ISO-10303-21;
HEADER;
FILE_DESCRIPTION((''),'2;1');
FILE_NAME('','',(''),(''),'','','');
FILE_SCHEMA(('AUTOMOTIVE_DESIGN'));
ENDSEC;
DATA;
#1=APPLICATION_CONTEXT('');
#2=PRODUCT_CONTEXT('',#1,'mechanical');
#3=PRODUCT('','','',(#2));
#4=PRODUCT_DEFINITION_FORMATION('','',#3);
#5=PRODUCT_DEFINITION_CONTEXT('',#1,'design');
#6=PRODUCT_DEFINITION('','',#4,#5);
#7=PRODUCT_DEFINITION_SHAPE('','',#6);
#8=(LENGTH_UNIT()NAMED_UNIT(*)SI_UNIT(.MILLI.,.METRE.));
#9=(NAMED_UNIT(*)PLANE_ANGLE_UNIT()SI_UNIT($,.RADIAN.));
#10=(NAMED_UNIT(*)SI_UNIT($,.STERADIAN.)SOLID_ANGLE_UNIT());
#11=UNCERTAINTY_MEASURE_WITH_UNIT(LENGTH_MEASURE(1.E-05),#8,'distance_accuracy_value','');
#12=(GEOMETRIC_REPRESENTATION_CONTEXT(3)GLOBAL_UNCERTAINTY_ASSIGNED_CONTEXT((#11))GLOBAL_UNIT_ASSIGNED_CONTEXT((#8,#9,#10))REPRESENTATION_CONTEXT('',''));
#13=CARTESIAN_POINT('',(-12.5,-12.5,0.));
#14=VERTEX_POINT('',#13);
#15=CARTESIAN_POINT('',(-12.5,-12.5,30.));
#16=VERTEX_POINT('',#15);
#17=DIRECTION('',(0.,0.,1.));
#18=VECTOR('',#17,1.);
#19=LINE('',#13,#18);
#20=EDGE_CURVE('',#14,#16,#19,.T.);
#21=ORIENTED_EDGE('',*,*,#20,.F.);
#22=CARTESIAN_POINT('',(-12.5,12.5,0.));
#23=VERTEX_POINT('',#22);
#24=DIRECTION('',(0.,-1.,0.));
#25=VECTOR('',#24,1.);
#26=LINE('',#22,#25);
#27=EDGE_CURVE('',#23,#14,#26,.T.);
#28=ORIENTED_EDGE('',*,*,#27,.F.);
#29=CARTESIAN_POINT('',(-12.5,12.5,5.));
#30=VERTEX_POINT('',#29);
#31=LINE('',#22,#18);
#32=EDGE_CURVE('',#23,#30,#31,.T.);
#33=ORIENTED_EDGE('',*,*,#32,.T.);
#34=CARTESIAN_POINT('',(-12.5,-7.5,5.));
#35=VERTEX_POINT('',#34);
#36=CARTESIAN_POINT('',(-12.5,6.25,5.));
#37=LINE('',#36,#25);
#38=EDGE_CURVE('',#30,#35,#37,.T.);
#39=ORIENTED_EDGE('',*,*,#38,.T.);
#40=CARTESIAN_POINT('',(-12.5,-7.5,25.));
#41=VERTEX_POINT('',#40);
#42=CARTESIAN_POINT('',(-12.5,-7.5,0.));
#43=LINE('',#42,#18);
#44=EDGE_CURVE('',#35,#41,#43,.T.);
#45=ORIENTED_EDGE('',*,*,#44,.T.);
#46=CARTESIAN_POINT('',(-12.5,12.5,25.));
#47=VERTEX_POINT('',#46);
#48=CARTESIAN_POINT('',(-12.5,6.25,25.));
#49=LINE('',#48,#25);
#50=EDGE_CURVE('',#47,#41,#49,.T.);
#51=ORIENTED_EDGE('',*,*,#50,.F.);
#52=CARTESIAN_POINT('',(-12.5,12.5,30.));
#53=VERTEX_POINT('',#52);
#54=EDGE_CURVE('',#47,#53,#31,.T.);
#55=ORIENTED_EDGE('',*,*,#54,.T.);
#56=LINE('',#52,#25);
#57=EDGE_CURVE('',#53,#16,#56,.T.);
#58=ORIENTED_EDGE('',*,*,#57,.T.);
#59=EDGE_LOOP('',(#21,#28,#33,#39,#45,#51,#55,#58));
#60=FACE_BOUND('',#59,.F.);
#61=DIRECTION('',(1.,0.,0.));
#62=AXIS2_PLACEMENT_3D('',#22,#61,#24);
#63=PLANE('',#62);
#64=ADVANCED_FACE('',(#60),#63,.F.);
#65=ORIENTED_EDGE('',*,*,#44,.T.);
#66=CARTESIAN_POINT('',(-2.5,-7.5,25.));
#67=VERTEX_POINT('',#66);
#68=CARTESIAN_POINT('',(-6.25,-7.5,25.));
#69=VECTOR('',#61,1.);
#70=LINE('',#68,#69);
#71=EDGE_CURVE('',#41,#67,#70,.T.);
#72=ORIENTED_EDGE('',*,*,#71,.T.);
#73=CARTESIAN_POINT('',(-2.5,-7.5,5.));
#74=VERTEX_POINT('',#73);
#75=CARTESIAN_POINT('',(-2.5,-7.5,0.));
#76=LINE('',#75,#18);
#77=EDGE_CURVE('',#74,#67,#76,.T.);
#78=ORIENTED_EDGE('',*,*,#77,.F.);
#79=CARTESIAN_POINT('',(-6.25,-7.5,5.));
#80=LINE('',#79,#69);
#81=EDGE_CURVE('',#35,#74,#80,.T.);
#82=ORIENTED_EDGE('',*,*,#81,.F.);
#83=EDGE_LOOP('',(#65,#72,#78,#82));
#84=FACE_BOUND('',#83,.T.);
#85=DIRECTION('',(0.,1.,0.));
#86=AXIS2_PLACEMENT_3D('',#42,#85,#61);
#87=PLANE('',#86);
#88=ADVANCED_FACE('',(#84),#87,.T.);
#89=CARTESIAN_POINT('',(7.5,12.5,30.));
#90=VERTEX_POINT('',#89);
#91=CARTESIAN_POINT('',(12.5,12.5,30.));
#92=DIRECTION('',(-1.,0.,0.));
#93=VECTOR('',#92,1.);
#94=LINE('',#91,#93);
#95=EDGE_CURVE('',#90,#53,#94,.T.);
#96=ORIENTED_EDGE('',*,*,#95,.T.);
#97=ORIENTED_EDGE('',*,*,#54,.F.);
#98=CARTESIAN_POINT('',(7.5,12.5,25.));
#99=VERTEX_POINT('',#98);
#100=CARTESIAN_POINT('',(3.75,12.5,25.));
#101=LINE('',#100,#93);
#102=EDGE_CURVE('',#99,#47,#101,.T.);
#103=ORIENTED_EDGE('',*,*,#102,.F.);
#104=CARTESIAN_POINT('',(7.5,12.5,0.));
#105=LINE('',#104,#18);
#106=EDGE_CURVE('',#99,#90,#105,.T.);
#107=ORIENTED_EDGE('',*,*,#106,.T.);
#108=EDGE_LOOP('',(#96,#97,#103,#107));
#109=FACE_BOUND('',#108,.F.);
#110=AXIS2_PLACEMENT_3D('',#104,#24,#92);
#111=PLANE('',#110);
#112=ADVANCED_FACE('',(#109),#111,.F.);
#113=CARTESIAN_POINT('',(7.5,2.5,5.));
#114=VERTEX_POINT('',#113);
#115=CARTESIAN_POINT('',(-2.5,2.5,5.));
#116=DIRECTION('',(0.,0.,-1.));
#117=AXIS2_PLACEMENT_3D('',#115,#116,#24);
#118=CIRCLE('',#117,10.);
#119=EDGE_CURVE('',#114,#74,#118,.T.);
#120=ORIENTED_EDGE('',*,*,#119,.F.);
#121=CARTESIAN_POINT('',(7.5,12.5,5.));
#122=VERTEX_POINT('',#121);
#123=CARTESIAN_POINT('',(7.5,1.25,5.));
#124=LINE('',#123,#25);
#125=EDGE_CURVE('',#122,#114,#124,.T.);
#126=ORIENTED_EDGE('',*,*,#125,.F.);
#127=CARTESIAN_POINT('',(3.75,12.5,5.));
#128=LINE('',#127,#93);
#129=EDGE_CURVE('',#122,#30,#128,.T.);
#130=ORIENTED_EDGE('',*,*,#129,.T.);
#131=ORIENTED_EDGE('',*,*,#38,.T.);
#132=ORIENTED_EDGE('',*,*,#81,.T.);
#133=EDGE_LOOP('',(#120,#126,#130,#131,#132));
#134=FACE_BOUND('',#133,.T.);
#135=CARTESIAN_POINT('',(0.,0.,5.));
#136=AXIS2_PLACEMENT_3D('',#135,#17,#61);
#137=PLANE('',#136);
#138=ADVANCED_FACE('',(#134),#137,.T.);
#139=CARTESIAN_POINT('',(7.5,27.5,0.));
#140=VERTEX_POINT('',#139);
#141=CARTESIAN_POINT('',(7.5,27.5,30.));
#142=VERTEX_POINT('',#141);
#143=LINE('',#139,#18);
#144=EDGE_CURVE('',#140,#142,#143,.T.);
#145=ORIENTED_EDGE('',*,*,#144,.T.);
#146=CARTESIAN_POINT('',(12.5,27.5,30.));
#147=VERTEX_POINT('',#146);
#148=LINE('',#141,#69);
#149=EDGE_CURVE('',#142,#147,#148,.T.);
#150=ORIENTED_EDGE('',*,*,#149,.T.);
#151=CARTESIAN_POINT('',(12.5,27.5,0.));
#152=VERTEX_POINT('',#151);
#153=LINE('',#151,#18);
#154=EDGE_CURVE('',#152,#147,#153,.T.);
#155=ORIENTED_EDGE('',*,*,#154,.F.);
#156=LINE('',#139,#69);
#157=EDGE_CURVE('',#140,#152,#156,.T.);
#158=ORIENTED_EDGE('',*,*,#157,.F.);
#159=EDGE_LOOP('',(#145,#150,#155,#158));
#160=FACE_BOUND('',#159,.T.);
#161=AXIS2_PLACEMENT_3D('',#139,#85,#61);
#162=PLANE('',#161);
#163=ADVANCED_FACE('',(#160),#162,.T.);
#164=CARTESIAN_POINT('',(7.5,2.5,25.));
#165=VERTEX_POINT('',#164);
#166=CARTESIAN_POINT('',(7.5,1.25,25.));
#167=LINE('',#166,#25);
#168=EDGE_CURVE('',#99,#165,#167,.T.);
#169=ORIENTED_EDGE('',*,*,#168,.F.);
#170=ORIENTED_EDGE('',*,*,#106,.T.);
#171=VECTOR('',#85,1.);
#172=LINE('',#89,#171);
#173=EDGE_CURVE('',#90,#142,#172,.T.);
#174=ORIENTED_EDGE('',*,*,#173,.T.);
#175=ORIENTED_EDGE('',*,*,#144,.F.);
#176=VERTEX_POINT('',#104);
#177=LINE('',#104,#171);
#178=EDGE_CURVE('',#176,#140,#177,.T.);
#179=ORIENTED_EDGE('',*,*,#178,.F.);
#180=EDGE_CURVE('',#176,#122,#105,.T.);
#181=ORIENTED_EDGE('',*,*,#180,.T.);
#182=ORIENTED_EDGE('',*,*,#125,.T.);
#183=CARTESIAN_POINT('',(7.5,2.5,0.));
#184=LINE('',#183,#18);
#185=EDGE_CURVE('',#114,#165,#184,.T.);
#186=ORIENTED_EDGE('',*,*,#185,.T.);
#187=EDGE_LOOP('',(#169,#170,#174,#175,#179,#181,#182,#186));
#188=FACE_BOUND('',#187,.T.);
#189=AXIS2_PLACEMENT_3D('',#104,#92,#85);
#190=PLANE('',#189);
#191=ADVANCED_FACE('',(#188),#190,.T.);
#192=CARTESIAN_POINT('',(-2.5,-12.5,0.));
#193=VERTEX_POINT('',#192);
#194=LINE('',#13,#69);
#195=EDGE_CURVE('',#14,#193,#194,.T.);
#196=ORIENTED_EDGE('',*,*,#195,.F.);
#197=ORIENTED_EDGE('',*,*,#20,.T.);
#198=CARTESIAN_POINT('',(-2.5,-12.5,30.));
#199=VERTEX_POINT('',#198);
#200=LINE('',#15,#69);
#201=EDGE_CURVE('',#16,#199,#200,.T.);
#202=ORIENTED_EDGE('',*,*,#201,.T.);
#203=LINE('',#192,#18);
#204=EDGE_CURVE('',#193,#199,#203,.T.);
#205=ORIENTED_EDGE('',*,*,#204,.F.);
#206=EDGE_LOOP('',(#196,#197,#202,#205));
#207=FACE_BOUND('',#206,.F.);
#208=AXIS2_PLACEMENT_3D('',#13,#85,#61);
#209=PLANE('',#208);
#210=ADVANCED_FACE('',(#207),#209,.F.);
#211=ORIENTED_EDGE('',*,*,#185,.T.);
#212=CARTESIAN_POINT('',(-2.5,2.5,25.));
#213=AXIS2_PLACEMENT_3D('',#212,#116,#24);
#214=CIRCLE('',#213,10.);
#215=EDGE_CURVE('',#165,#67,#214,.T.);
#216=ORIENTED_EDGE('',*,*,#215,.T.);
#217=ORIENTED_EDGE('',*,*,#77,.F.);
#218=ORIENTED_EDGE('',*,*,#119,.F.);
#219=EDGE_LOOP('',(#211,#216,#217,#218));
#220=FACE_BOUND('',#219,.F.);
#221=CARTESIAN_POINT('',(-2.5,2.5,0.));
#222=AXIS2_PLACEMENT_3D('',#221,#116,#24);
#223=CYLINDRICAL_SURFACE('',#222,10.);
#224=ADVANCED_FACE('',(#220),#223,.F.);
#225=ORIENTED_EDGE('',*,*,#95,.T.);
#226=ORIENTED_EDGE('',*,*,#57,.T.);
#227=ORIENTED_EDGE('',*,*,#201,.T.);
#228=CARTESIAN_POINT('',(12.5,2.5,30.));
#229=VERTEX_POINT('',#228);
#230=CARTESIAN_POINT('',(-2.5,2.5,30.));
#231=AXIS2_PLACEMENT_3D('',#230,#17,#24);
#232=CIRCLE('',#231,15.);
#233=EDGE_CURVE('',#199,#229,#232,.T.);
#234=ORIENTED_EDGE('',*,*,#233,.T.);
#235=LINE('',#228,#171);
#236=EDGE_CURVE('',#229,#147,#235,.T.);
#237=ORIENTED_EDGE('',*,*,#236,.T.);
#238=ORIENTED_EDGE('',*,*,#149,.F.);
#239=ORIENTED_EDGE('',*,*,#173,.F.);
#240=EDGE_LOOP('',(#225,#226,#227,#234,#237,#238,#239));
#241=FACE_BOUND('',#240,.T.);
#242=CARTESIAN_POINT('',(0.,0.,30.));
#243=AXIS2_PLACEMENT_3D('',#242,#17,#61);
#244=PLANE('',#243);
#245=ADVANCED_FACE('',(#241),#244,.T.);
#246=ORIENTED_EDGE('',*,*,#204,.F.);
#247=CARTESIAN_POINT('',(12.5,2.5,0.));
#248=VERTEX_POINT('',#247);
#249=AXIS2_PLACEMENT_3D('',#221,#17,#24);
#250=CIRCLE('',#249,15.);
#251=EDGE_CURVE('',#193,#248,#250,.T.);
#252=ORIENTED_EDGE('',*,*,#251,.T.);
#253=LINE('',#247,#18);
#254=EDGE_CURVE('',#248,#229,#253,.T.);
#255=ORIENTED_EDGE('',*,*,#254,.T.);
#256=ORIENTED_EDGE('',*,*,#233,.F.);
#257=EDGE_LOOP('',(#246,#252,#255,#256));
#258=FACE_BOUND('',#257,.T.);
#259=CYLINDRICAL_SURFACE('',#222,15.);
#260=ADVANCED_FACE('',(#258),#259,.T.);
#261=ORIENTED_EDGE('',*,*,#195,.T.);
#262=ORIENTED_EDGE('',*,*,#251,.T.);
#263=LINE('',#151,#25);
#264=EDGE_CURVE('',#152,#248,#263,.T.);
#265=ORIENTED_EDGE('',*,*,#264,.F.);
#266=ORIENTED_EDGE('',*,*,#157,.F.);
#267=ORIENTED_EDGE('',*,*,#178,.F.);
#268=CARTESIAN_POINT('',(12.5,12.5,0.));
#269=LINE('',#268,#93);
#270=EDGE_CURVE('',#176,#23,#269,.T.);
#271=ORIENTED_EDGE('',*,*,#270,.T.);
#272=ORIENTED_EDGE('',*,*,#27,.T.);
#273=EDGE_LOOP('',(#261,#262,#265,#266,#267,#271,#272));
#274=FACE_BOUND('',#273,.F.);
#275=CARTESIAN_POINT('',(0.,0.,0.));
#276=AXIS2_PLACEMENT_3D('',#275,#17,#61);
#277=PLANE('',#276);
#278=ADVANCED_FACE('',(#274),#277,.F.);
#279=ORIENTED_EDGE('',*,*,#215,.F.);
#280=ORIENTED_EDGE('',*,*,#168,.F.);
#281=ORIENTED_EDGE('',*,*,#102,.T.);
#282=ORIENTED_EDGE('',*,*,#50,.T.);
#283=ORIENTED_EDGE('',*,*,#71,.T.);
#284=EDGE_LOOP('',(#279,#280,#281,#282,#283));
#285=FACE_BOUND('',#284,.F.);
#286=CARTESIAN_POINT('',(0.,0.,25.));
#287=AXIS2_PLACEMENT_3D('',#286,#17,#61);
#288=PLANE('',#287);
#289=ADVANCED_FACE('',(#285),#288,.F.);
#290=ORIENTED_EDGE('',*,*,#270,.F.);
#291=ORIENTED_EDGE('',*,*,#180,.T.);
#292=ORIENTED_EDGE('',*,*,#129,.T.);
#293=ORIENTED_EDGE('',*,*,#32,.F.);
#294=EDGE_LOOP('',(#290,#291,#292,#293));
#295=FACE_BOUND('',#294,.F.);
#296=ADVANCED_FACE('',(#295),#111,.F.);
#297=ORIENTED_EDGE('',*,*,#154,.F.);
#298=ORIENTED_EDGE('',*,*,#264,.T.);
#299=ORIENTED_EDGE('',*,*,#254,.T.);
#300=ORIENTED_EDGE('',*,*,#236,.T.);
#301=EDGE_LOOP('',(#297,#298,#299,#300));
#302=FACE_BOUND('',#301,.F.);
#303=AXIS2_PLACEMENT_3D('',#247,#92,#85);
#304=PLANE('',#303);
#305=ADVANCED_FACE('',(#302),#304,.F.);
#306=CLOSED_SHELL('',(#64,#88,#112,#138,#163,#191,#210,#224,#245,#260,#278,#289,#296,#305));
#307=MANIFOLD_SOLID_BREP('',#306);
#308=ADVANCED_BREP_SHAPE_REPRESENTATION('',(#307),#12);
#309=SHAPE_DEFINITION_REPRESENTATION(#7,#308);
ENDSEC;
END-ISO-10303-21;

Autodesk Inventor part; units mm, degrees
ref_plane "YZ Plane" through (0, 0, 0) normal (1, 0, 0) x (0, 1, 0)
ref_plane "XZ Plane" through (0, 0, 0) normal (0, 1, 0) x (-1, 0, 0)
ref_plane "XY Plane" through (0, 0, 0) normal (0, 0, 1) x (1, 0, 0)
sketch "Esboço1" plane through (0, 0, 0) normal (0, 0, 1) x (1, 0, 0)
  line L0 (-12.5, -12.5) -> (-2.5, -12.5)
  line L1 (12.5, 2.5) -> (12.5, 12.5)
  line L2 (12.5, 12.5) -> (-12.5, 12.5)
  line L3 (-12.5, 12.5) -> (-12.5, -12.5)
  line L4 (-12.5, -12.5) -> (12.5, 12.5) construction
  line L5 (12.5, -12.5) -> (-12.5, 12.5) construction
  line L6 (12.5, 12.5) -> (7.5, 12.5)
  line L7 (7.5, 12.5) -> (7.5, 27.5)
  line L8 (7.5, 27.5) -> (12.5, 27.5)
  line L9 (12.5, 27.5) -> (12.5, 12.5)
  arc A0 (-2.5, -12.5) -> (12.5, 2.5) centre (-2.5, 2.5) ccw
  point P0 (0, 0)
  dimension "d0" = 25
  dimension "d1" = 25
  dimension "d2" = 5
  dimension "d3" = 15
  dimension "d4" = 15
extrude "Extrusão1" add sketch "Esboço1" along normal blind 30
shell "Casca1" thickness 5 removed faces 2 at (0.8333, 12.5, 10) at (-12.5, 4.1667, 20)
properties part number "Servo mount"
